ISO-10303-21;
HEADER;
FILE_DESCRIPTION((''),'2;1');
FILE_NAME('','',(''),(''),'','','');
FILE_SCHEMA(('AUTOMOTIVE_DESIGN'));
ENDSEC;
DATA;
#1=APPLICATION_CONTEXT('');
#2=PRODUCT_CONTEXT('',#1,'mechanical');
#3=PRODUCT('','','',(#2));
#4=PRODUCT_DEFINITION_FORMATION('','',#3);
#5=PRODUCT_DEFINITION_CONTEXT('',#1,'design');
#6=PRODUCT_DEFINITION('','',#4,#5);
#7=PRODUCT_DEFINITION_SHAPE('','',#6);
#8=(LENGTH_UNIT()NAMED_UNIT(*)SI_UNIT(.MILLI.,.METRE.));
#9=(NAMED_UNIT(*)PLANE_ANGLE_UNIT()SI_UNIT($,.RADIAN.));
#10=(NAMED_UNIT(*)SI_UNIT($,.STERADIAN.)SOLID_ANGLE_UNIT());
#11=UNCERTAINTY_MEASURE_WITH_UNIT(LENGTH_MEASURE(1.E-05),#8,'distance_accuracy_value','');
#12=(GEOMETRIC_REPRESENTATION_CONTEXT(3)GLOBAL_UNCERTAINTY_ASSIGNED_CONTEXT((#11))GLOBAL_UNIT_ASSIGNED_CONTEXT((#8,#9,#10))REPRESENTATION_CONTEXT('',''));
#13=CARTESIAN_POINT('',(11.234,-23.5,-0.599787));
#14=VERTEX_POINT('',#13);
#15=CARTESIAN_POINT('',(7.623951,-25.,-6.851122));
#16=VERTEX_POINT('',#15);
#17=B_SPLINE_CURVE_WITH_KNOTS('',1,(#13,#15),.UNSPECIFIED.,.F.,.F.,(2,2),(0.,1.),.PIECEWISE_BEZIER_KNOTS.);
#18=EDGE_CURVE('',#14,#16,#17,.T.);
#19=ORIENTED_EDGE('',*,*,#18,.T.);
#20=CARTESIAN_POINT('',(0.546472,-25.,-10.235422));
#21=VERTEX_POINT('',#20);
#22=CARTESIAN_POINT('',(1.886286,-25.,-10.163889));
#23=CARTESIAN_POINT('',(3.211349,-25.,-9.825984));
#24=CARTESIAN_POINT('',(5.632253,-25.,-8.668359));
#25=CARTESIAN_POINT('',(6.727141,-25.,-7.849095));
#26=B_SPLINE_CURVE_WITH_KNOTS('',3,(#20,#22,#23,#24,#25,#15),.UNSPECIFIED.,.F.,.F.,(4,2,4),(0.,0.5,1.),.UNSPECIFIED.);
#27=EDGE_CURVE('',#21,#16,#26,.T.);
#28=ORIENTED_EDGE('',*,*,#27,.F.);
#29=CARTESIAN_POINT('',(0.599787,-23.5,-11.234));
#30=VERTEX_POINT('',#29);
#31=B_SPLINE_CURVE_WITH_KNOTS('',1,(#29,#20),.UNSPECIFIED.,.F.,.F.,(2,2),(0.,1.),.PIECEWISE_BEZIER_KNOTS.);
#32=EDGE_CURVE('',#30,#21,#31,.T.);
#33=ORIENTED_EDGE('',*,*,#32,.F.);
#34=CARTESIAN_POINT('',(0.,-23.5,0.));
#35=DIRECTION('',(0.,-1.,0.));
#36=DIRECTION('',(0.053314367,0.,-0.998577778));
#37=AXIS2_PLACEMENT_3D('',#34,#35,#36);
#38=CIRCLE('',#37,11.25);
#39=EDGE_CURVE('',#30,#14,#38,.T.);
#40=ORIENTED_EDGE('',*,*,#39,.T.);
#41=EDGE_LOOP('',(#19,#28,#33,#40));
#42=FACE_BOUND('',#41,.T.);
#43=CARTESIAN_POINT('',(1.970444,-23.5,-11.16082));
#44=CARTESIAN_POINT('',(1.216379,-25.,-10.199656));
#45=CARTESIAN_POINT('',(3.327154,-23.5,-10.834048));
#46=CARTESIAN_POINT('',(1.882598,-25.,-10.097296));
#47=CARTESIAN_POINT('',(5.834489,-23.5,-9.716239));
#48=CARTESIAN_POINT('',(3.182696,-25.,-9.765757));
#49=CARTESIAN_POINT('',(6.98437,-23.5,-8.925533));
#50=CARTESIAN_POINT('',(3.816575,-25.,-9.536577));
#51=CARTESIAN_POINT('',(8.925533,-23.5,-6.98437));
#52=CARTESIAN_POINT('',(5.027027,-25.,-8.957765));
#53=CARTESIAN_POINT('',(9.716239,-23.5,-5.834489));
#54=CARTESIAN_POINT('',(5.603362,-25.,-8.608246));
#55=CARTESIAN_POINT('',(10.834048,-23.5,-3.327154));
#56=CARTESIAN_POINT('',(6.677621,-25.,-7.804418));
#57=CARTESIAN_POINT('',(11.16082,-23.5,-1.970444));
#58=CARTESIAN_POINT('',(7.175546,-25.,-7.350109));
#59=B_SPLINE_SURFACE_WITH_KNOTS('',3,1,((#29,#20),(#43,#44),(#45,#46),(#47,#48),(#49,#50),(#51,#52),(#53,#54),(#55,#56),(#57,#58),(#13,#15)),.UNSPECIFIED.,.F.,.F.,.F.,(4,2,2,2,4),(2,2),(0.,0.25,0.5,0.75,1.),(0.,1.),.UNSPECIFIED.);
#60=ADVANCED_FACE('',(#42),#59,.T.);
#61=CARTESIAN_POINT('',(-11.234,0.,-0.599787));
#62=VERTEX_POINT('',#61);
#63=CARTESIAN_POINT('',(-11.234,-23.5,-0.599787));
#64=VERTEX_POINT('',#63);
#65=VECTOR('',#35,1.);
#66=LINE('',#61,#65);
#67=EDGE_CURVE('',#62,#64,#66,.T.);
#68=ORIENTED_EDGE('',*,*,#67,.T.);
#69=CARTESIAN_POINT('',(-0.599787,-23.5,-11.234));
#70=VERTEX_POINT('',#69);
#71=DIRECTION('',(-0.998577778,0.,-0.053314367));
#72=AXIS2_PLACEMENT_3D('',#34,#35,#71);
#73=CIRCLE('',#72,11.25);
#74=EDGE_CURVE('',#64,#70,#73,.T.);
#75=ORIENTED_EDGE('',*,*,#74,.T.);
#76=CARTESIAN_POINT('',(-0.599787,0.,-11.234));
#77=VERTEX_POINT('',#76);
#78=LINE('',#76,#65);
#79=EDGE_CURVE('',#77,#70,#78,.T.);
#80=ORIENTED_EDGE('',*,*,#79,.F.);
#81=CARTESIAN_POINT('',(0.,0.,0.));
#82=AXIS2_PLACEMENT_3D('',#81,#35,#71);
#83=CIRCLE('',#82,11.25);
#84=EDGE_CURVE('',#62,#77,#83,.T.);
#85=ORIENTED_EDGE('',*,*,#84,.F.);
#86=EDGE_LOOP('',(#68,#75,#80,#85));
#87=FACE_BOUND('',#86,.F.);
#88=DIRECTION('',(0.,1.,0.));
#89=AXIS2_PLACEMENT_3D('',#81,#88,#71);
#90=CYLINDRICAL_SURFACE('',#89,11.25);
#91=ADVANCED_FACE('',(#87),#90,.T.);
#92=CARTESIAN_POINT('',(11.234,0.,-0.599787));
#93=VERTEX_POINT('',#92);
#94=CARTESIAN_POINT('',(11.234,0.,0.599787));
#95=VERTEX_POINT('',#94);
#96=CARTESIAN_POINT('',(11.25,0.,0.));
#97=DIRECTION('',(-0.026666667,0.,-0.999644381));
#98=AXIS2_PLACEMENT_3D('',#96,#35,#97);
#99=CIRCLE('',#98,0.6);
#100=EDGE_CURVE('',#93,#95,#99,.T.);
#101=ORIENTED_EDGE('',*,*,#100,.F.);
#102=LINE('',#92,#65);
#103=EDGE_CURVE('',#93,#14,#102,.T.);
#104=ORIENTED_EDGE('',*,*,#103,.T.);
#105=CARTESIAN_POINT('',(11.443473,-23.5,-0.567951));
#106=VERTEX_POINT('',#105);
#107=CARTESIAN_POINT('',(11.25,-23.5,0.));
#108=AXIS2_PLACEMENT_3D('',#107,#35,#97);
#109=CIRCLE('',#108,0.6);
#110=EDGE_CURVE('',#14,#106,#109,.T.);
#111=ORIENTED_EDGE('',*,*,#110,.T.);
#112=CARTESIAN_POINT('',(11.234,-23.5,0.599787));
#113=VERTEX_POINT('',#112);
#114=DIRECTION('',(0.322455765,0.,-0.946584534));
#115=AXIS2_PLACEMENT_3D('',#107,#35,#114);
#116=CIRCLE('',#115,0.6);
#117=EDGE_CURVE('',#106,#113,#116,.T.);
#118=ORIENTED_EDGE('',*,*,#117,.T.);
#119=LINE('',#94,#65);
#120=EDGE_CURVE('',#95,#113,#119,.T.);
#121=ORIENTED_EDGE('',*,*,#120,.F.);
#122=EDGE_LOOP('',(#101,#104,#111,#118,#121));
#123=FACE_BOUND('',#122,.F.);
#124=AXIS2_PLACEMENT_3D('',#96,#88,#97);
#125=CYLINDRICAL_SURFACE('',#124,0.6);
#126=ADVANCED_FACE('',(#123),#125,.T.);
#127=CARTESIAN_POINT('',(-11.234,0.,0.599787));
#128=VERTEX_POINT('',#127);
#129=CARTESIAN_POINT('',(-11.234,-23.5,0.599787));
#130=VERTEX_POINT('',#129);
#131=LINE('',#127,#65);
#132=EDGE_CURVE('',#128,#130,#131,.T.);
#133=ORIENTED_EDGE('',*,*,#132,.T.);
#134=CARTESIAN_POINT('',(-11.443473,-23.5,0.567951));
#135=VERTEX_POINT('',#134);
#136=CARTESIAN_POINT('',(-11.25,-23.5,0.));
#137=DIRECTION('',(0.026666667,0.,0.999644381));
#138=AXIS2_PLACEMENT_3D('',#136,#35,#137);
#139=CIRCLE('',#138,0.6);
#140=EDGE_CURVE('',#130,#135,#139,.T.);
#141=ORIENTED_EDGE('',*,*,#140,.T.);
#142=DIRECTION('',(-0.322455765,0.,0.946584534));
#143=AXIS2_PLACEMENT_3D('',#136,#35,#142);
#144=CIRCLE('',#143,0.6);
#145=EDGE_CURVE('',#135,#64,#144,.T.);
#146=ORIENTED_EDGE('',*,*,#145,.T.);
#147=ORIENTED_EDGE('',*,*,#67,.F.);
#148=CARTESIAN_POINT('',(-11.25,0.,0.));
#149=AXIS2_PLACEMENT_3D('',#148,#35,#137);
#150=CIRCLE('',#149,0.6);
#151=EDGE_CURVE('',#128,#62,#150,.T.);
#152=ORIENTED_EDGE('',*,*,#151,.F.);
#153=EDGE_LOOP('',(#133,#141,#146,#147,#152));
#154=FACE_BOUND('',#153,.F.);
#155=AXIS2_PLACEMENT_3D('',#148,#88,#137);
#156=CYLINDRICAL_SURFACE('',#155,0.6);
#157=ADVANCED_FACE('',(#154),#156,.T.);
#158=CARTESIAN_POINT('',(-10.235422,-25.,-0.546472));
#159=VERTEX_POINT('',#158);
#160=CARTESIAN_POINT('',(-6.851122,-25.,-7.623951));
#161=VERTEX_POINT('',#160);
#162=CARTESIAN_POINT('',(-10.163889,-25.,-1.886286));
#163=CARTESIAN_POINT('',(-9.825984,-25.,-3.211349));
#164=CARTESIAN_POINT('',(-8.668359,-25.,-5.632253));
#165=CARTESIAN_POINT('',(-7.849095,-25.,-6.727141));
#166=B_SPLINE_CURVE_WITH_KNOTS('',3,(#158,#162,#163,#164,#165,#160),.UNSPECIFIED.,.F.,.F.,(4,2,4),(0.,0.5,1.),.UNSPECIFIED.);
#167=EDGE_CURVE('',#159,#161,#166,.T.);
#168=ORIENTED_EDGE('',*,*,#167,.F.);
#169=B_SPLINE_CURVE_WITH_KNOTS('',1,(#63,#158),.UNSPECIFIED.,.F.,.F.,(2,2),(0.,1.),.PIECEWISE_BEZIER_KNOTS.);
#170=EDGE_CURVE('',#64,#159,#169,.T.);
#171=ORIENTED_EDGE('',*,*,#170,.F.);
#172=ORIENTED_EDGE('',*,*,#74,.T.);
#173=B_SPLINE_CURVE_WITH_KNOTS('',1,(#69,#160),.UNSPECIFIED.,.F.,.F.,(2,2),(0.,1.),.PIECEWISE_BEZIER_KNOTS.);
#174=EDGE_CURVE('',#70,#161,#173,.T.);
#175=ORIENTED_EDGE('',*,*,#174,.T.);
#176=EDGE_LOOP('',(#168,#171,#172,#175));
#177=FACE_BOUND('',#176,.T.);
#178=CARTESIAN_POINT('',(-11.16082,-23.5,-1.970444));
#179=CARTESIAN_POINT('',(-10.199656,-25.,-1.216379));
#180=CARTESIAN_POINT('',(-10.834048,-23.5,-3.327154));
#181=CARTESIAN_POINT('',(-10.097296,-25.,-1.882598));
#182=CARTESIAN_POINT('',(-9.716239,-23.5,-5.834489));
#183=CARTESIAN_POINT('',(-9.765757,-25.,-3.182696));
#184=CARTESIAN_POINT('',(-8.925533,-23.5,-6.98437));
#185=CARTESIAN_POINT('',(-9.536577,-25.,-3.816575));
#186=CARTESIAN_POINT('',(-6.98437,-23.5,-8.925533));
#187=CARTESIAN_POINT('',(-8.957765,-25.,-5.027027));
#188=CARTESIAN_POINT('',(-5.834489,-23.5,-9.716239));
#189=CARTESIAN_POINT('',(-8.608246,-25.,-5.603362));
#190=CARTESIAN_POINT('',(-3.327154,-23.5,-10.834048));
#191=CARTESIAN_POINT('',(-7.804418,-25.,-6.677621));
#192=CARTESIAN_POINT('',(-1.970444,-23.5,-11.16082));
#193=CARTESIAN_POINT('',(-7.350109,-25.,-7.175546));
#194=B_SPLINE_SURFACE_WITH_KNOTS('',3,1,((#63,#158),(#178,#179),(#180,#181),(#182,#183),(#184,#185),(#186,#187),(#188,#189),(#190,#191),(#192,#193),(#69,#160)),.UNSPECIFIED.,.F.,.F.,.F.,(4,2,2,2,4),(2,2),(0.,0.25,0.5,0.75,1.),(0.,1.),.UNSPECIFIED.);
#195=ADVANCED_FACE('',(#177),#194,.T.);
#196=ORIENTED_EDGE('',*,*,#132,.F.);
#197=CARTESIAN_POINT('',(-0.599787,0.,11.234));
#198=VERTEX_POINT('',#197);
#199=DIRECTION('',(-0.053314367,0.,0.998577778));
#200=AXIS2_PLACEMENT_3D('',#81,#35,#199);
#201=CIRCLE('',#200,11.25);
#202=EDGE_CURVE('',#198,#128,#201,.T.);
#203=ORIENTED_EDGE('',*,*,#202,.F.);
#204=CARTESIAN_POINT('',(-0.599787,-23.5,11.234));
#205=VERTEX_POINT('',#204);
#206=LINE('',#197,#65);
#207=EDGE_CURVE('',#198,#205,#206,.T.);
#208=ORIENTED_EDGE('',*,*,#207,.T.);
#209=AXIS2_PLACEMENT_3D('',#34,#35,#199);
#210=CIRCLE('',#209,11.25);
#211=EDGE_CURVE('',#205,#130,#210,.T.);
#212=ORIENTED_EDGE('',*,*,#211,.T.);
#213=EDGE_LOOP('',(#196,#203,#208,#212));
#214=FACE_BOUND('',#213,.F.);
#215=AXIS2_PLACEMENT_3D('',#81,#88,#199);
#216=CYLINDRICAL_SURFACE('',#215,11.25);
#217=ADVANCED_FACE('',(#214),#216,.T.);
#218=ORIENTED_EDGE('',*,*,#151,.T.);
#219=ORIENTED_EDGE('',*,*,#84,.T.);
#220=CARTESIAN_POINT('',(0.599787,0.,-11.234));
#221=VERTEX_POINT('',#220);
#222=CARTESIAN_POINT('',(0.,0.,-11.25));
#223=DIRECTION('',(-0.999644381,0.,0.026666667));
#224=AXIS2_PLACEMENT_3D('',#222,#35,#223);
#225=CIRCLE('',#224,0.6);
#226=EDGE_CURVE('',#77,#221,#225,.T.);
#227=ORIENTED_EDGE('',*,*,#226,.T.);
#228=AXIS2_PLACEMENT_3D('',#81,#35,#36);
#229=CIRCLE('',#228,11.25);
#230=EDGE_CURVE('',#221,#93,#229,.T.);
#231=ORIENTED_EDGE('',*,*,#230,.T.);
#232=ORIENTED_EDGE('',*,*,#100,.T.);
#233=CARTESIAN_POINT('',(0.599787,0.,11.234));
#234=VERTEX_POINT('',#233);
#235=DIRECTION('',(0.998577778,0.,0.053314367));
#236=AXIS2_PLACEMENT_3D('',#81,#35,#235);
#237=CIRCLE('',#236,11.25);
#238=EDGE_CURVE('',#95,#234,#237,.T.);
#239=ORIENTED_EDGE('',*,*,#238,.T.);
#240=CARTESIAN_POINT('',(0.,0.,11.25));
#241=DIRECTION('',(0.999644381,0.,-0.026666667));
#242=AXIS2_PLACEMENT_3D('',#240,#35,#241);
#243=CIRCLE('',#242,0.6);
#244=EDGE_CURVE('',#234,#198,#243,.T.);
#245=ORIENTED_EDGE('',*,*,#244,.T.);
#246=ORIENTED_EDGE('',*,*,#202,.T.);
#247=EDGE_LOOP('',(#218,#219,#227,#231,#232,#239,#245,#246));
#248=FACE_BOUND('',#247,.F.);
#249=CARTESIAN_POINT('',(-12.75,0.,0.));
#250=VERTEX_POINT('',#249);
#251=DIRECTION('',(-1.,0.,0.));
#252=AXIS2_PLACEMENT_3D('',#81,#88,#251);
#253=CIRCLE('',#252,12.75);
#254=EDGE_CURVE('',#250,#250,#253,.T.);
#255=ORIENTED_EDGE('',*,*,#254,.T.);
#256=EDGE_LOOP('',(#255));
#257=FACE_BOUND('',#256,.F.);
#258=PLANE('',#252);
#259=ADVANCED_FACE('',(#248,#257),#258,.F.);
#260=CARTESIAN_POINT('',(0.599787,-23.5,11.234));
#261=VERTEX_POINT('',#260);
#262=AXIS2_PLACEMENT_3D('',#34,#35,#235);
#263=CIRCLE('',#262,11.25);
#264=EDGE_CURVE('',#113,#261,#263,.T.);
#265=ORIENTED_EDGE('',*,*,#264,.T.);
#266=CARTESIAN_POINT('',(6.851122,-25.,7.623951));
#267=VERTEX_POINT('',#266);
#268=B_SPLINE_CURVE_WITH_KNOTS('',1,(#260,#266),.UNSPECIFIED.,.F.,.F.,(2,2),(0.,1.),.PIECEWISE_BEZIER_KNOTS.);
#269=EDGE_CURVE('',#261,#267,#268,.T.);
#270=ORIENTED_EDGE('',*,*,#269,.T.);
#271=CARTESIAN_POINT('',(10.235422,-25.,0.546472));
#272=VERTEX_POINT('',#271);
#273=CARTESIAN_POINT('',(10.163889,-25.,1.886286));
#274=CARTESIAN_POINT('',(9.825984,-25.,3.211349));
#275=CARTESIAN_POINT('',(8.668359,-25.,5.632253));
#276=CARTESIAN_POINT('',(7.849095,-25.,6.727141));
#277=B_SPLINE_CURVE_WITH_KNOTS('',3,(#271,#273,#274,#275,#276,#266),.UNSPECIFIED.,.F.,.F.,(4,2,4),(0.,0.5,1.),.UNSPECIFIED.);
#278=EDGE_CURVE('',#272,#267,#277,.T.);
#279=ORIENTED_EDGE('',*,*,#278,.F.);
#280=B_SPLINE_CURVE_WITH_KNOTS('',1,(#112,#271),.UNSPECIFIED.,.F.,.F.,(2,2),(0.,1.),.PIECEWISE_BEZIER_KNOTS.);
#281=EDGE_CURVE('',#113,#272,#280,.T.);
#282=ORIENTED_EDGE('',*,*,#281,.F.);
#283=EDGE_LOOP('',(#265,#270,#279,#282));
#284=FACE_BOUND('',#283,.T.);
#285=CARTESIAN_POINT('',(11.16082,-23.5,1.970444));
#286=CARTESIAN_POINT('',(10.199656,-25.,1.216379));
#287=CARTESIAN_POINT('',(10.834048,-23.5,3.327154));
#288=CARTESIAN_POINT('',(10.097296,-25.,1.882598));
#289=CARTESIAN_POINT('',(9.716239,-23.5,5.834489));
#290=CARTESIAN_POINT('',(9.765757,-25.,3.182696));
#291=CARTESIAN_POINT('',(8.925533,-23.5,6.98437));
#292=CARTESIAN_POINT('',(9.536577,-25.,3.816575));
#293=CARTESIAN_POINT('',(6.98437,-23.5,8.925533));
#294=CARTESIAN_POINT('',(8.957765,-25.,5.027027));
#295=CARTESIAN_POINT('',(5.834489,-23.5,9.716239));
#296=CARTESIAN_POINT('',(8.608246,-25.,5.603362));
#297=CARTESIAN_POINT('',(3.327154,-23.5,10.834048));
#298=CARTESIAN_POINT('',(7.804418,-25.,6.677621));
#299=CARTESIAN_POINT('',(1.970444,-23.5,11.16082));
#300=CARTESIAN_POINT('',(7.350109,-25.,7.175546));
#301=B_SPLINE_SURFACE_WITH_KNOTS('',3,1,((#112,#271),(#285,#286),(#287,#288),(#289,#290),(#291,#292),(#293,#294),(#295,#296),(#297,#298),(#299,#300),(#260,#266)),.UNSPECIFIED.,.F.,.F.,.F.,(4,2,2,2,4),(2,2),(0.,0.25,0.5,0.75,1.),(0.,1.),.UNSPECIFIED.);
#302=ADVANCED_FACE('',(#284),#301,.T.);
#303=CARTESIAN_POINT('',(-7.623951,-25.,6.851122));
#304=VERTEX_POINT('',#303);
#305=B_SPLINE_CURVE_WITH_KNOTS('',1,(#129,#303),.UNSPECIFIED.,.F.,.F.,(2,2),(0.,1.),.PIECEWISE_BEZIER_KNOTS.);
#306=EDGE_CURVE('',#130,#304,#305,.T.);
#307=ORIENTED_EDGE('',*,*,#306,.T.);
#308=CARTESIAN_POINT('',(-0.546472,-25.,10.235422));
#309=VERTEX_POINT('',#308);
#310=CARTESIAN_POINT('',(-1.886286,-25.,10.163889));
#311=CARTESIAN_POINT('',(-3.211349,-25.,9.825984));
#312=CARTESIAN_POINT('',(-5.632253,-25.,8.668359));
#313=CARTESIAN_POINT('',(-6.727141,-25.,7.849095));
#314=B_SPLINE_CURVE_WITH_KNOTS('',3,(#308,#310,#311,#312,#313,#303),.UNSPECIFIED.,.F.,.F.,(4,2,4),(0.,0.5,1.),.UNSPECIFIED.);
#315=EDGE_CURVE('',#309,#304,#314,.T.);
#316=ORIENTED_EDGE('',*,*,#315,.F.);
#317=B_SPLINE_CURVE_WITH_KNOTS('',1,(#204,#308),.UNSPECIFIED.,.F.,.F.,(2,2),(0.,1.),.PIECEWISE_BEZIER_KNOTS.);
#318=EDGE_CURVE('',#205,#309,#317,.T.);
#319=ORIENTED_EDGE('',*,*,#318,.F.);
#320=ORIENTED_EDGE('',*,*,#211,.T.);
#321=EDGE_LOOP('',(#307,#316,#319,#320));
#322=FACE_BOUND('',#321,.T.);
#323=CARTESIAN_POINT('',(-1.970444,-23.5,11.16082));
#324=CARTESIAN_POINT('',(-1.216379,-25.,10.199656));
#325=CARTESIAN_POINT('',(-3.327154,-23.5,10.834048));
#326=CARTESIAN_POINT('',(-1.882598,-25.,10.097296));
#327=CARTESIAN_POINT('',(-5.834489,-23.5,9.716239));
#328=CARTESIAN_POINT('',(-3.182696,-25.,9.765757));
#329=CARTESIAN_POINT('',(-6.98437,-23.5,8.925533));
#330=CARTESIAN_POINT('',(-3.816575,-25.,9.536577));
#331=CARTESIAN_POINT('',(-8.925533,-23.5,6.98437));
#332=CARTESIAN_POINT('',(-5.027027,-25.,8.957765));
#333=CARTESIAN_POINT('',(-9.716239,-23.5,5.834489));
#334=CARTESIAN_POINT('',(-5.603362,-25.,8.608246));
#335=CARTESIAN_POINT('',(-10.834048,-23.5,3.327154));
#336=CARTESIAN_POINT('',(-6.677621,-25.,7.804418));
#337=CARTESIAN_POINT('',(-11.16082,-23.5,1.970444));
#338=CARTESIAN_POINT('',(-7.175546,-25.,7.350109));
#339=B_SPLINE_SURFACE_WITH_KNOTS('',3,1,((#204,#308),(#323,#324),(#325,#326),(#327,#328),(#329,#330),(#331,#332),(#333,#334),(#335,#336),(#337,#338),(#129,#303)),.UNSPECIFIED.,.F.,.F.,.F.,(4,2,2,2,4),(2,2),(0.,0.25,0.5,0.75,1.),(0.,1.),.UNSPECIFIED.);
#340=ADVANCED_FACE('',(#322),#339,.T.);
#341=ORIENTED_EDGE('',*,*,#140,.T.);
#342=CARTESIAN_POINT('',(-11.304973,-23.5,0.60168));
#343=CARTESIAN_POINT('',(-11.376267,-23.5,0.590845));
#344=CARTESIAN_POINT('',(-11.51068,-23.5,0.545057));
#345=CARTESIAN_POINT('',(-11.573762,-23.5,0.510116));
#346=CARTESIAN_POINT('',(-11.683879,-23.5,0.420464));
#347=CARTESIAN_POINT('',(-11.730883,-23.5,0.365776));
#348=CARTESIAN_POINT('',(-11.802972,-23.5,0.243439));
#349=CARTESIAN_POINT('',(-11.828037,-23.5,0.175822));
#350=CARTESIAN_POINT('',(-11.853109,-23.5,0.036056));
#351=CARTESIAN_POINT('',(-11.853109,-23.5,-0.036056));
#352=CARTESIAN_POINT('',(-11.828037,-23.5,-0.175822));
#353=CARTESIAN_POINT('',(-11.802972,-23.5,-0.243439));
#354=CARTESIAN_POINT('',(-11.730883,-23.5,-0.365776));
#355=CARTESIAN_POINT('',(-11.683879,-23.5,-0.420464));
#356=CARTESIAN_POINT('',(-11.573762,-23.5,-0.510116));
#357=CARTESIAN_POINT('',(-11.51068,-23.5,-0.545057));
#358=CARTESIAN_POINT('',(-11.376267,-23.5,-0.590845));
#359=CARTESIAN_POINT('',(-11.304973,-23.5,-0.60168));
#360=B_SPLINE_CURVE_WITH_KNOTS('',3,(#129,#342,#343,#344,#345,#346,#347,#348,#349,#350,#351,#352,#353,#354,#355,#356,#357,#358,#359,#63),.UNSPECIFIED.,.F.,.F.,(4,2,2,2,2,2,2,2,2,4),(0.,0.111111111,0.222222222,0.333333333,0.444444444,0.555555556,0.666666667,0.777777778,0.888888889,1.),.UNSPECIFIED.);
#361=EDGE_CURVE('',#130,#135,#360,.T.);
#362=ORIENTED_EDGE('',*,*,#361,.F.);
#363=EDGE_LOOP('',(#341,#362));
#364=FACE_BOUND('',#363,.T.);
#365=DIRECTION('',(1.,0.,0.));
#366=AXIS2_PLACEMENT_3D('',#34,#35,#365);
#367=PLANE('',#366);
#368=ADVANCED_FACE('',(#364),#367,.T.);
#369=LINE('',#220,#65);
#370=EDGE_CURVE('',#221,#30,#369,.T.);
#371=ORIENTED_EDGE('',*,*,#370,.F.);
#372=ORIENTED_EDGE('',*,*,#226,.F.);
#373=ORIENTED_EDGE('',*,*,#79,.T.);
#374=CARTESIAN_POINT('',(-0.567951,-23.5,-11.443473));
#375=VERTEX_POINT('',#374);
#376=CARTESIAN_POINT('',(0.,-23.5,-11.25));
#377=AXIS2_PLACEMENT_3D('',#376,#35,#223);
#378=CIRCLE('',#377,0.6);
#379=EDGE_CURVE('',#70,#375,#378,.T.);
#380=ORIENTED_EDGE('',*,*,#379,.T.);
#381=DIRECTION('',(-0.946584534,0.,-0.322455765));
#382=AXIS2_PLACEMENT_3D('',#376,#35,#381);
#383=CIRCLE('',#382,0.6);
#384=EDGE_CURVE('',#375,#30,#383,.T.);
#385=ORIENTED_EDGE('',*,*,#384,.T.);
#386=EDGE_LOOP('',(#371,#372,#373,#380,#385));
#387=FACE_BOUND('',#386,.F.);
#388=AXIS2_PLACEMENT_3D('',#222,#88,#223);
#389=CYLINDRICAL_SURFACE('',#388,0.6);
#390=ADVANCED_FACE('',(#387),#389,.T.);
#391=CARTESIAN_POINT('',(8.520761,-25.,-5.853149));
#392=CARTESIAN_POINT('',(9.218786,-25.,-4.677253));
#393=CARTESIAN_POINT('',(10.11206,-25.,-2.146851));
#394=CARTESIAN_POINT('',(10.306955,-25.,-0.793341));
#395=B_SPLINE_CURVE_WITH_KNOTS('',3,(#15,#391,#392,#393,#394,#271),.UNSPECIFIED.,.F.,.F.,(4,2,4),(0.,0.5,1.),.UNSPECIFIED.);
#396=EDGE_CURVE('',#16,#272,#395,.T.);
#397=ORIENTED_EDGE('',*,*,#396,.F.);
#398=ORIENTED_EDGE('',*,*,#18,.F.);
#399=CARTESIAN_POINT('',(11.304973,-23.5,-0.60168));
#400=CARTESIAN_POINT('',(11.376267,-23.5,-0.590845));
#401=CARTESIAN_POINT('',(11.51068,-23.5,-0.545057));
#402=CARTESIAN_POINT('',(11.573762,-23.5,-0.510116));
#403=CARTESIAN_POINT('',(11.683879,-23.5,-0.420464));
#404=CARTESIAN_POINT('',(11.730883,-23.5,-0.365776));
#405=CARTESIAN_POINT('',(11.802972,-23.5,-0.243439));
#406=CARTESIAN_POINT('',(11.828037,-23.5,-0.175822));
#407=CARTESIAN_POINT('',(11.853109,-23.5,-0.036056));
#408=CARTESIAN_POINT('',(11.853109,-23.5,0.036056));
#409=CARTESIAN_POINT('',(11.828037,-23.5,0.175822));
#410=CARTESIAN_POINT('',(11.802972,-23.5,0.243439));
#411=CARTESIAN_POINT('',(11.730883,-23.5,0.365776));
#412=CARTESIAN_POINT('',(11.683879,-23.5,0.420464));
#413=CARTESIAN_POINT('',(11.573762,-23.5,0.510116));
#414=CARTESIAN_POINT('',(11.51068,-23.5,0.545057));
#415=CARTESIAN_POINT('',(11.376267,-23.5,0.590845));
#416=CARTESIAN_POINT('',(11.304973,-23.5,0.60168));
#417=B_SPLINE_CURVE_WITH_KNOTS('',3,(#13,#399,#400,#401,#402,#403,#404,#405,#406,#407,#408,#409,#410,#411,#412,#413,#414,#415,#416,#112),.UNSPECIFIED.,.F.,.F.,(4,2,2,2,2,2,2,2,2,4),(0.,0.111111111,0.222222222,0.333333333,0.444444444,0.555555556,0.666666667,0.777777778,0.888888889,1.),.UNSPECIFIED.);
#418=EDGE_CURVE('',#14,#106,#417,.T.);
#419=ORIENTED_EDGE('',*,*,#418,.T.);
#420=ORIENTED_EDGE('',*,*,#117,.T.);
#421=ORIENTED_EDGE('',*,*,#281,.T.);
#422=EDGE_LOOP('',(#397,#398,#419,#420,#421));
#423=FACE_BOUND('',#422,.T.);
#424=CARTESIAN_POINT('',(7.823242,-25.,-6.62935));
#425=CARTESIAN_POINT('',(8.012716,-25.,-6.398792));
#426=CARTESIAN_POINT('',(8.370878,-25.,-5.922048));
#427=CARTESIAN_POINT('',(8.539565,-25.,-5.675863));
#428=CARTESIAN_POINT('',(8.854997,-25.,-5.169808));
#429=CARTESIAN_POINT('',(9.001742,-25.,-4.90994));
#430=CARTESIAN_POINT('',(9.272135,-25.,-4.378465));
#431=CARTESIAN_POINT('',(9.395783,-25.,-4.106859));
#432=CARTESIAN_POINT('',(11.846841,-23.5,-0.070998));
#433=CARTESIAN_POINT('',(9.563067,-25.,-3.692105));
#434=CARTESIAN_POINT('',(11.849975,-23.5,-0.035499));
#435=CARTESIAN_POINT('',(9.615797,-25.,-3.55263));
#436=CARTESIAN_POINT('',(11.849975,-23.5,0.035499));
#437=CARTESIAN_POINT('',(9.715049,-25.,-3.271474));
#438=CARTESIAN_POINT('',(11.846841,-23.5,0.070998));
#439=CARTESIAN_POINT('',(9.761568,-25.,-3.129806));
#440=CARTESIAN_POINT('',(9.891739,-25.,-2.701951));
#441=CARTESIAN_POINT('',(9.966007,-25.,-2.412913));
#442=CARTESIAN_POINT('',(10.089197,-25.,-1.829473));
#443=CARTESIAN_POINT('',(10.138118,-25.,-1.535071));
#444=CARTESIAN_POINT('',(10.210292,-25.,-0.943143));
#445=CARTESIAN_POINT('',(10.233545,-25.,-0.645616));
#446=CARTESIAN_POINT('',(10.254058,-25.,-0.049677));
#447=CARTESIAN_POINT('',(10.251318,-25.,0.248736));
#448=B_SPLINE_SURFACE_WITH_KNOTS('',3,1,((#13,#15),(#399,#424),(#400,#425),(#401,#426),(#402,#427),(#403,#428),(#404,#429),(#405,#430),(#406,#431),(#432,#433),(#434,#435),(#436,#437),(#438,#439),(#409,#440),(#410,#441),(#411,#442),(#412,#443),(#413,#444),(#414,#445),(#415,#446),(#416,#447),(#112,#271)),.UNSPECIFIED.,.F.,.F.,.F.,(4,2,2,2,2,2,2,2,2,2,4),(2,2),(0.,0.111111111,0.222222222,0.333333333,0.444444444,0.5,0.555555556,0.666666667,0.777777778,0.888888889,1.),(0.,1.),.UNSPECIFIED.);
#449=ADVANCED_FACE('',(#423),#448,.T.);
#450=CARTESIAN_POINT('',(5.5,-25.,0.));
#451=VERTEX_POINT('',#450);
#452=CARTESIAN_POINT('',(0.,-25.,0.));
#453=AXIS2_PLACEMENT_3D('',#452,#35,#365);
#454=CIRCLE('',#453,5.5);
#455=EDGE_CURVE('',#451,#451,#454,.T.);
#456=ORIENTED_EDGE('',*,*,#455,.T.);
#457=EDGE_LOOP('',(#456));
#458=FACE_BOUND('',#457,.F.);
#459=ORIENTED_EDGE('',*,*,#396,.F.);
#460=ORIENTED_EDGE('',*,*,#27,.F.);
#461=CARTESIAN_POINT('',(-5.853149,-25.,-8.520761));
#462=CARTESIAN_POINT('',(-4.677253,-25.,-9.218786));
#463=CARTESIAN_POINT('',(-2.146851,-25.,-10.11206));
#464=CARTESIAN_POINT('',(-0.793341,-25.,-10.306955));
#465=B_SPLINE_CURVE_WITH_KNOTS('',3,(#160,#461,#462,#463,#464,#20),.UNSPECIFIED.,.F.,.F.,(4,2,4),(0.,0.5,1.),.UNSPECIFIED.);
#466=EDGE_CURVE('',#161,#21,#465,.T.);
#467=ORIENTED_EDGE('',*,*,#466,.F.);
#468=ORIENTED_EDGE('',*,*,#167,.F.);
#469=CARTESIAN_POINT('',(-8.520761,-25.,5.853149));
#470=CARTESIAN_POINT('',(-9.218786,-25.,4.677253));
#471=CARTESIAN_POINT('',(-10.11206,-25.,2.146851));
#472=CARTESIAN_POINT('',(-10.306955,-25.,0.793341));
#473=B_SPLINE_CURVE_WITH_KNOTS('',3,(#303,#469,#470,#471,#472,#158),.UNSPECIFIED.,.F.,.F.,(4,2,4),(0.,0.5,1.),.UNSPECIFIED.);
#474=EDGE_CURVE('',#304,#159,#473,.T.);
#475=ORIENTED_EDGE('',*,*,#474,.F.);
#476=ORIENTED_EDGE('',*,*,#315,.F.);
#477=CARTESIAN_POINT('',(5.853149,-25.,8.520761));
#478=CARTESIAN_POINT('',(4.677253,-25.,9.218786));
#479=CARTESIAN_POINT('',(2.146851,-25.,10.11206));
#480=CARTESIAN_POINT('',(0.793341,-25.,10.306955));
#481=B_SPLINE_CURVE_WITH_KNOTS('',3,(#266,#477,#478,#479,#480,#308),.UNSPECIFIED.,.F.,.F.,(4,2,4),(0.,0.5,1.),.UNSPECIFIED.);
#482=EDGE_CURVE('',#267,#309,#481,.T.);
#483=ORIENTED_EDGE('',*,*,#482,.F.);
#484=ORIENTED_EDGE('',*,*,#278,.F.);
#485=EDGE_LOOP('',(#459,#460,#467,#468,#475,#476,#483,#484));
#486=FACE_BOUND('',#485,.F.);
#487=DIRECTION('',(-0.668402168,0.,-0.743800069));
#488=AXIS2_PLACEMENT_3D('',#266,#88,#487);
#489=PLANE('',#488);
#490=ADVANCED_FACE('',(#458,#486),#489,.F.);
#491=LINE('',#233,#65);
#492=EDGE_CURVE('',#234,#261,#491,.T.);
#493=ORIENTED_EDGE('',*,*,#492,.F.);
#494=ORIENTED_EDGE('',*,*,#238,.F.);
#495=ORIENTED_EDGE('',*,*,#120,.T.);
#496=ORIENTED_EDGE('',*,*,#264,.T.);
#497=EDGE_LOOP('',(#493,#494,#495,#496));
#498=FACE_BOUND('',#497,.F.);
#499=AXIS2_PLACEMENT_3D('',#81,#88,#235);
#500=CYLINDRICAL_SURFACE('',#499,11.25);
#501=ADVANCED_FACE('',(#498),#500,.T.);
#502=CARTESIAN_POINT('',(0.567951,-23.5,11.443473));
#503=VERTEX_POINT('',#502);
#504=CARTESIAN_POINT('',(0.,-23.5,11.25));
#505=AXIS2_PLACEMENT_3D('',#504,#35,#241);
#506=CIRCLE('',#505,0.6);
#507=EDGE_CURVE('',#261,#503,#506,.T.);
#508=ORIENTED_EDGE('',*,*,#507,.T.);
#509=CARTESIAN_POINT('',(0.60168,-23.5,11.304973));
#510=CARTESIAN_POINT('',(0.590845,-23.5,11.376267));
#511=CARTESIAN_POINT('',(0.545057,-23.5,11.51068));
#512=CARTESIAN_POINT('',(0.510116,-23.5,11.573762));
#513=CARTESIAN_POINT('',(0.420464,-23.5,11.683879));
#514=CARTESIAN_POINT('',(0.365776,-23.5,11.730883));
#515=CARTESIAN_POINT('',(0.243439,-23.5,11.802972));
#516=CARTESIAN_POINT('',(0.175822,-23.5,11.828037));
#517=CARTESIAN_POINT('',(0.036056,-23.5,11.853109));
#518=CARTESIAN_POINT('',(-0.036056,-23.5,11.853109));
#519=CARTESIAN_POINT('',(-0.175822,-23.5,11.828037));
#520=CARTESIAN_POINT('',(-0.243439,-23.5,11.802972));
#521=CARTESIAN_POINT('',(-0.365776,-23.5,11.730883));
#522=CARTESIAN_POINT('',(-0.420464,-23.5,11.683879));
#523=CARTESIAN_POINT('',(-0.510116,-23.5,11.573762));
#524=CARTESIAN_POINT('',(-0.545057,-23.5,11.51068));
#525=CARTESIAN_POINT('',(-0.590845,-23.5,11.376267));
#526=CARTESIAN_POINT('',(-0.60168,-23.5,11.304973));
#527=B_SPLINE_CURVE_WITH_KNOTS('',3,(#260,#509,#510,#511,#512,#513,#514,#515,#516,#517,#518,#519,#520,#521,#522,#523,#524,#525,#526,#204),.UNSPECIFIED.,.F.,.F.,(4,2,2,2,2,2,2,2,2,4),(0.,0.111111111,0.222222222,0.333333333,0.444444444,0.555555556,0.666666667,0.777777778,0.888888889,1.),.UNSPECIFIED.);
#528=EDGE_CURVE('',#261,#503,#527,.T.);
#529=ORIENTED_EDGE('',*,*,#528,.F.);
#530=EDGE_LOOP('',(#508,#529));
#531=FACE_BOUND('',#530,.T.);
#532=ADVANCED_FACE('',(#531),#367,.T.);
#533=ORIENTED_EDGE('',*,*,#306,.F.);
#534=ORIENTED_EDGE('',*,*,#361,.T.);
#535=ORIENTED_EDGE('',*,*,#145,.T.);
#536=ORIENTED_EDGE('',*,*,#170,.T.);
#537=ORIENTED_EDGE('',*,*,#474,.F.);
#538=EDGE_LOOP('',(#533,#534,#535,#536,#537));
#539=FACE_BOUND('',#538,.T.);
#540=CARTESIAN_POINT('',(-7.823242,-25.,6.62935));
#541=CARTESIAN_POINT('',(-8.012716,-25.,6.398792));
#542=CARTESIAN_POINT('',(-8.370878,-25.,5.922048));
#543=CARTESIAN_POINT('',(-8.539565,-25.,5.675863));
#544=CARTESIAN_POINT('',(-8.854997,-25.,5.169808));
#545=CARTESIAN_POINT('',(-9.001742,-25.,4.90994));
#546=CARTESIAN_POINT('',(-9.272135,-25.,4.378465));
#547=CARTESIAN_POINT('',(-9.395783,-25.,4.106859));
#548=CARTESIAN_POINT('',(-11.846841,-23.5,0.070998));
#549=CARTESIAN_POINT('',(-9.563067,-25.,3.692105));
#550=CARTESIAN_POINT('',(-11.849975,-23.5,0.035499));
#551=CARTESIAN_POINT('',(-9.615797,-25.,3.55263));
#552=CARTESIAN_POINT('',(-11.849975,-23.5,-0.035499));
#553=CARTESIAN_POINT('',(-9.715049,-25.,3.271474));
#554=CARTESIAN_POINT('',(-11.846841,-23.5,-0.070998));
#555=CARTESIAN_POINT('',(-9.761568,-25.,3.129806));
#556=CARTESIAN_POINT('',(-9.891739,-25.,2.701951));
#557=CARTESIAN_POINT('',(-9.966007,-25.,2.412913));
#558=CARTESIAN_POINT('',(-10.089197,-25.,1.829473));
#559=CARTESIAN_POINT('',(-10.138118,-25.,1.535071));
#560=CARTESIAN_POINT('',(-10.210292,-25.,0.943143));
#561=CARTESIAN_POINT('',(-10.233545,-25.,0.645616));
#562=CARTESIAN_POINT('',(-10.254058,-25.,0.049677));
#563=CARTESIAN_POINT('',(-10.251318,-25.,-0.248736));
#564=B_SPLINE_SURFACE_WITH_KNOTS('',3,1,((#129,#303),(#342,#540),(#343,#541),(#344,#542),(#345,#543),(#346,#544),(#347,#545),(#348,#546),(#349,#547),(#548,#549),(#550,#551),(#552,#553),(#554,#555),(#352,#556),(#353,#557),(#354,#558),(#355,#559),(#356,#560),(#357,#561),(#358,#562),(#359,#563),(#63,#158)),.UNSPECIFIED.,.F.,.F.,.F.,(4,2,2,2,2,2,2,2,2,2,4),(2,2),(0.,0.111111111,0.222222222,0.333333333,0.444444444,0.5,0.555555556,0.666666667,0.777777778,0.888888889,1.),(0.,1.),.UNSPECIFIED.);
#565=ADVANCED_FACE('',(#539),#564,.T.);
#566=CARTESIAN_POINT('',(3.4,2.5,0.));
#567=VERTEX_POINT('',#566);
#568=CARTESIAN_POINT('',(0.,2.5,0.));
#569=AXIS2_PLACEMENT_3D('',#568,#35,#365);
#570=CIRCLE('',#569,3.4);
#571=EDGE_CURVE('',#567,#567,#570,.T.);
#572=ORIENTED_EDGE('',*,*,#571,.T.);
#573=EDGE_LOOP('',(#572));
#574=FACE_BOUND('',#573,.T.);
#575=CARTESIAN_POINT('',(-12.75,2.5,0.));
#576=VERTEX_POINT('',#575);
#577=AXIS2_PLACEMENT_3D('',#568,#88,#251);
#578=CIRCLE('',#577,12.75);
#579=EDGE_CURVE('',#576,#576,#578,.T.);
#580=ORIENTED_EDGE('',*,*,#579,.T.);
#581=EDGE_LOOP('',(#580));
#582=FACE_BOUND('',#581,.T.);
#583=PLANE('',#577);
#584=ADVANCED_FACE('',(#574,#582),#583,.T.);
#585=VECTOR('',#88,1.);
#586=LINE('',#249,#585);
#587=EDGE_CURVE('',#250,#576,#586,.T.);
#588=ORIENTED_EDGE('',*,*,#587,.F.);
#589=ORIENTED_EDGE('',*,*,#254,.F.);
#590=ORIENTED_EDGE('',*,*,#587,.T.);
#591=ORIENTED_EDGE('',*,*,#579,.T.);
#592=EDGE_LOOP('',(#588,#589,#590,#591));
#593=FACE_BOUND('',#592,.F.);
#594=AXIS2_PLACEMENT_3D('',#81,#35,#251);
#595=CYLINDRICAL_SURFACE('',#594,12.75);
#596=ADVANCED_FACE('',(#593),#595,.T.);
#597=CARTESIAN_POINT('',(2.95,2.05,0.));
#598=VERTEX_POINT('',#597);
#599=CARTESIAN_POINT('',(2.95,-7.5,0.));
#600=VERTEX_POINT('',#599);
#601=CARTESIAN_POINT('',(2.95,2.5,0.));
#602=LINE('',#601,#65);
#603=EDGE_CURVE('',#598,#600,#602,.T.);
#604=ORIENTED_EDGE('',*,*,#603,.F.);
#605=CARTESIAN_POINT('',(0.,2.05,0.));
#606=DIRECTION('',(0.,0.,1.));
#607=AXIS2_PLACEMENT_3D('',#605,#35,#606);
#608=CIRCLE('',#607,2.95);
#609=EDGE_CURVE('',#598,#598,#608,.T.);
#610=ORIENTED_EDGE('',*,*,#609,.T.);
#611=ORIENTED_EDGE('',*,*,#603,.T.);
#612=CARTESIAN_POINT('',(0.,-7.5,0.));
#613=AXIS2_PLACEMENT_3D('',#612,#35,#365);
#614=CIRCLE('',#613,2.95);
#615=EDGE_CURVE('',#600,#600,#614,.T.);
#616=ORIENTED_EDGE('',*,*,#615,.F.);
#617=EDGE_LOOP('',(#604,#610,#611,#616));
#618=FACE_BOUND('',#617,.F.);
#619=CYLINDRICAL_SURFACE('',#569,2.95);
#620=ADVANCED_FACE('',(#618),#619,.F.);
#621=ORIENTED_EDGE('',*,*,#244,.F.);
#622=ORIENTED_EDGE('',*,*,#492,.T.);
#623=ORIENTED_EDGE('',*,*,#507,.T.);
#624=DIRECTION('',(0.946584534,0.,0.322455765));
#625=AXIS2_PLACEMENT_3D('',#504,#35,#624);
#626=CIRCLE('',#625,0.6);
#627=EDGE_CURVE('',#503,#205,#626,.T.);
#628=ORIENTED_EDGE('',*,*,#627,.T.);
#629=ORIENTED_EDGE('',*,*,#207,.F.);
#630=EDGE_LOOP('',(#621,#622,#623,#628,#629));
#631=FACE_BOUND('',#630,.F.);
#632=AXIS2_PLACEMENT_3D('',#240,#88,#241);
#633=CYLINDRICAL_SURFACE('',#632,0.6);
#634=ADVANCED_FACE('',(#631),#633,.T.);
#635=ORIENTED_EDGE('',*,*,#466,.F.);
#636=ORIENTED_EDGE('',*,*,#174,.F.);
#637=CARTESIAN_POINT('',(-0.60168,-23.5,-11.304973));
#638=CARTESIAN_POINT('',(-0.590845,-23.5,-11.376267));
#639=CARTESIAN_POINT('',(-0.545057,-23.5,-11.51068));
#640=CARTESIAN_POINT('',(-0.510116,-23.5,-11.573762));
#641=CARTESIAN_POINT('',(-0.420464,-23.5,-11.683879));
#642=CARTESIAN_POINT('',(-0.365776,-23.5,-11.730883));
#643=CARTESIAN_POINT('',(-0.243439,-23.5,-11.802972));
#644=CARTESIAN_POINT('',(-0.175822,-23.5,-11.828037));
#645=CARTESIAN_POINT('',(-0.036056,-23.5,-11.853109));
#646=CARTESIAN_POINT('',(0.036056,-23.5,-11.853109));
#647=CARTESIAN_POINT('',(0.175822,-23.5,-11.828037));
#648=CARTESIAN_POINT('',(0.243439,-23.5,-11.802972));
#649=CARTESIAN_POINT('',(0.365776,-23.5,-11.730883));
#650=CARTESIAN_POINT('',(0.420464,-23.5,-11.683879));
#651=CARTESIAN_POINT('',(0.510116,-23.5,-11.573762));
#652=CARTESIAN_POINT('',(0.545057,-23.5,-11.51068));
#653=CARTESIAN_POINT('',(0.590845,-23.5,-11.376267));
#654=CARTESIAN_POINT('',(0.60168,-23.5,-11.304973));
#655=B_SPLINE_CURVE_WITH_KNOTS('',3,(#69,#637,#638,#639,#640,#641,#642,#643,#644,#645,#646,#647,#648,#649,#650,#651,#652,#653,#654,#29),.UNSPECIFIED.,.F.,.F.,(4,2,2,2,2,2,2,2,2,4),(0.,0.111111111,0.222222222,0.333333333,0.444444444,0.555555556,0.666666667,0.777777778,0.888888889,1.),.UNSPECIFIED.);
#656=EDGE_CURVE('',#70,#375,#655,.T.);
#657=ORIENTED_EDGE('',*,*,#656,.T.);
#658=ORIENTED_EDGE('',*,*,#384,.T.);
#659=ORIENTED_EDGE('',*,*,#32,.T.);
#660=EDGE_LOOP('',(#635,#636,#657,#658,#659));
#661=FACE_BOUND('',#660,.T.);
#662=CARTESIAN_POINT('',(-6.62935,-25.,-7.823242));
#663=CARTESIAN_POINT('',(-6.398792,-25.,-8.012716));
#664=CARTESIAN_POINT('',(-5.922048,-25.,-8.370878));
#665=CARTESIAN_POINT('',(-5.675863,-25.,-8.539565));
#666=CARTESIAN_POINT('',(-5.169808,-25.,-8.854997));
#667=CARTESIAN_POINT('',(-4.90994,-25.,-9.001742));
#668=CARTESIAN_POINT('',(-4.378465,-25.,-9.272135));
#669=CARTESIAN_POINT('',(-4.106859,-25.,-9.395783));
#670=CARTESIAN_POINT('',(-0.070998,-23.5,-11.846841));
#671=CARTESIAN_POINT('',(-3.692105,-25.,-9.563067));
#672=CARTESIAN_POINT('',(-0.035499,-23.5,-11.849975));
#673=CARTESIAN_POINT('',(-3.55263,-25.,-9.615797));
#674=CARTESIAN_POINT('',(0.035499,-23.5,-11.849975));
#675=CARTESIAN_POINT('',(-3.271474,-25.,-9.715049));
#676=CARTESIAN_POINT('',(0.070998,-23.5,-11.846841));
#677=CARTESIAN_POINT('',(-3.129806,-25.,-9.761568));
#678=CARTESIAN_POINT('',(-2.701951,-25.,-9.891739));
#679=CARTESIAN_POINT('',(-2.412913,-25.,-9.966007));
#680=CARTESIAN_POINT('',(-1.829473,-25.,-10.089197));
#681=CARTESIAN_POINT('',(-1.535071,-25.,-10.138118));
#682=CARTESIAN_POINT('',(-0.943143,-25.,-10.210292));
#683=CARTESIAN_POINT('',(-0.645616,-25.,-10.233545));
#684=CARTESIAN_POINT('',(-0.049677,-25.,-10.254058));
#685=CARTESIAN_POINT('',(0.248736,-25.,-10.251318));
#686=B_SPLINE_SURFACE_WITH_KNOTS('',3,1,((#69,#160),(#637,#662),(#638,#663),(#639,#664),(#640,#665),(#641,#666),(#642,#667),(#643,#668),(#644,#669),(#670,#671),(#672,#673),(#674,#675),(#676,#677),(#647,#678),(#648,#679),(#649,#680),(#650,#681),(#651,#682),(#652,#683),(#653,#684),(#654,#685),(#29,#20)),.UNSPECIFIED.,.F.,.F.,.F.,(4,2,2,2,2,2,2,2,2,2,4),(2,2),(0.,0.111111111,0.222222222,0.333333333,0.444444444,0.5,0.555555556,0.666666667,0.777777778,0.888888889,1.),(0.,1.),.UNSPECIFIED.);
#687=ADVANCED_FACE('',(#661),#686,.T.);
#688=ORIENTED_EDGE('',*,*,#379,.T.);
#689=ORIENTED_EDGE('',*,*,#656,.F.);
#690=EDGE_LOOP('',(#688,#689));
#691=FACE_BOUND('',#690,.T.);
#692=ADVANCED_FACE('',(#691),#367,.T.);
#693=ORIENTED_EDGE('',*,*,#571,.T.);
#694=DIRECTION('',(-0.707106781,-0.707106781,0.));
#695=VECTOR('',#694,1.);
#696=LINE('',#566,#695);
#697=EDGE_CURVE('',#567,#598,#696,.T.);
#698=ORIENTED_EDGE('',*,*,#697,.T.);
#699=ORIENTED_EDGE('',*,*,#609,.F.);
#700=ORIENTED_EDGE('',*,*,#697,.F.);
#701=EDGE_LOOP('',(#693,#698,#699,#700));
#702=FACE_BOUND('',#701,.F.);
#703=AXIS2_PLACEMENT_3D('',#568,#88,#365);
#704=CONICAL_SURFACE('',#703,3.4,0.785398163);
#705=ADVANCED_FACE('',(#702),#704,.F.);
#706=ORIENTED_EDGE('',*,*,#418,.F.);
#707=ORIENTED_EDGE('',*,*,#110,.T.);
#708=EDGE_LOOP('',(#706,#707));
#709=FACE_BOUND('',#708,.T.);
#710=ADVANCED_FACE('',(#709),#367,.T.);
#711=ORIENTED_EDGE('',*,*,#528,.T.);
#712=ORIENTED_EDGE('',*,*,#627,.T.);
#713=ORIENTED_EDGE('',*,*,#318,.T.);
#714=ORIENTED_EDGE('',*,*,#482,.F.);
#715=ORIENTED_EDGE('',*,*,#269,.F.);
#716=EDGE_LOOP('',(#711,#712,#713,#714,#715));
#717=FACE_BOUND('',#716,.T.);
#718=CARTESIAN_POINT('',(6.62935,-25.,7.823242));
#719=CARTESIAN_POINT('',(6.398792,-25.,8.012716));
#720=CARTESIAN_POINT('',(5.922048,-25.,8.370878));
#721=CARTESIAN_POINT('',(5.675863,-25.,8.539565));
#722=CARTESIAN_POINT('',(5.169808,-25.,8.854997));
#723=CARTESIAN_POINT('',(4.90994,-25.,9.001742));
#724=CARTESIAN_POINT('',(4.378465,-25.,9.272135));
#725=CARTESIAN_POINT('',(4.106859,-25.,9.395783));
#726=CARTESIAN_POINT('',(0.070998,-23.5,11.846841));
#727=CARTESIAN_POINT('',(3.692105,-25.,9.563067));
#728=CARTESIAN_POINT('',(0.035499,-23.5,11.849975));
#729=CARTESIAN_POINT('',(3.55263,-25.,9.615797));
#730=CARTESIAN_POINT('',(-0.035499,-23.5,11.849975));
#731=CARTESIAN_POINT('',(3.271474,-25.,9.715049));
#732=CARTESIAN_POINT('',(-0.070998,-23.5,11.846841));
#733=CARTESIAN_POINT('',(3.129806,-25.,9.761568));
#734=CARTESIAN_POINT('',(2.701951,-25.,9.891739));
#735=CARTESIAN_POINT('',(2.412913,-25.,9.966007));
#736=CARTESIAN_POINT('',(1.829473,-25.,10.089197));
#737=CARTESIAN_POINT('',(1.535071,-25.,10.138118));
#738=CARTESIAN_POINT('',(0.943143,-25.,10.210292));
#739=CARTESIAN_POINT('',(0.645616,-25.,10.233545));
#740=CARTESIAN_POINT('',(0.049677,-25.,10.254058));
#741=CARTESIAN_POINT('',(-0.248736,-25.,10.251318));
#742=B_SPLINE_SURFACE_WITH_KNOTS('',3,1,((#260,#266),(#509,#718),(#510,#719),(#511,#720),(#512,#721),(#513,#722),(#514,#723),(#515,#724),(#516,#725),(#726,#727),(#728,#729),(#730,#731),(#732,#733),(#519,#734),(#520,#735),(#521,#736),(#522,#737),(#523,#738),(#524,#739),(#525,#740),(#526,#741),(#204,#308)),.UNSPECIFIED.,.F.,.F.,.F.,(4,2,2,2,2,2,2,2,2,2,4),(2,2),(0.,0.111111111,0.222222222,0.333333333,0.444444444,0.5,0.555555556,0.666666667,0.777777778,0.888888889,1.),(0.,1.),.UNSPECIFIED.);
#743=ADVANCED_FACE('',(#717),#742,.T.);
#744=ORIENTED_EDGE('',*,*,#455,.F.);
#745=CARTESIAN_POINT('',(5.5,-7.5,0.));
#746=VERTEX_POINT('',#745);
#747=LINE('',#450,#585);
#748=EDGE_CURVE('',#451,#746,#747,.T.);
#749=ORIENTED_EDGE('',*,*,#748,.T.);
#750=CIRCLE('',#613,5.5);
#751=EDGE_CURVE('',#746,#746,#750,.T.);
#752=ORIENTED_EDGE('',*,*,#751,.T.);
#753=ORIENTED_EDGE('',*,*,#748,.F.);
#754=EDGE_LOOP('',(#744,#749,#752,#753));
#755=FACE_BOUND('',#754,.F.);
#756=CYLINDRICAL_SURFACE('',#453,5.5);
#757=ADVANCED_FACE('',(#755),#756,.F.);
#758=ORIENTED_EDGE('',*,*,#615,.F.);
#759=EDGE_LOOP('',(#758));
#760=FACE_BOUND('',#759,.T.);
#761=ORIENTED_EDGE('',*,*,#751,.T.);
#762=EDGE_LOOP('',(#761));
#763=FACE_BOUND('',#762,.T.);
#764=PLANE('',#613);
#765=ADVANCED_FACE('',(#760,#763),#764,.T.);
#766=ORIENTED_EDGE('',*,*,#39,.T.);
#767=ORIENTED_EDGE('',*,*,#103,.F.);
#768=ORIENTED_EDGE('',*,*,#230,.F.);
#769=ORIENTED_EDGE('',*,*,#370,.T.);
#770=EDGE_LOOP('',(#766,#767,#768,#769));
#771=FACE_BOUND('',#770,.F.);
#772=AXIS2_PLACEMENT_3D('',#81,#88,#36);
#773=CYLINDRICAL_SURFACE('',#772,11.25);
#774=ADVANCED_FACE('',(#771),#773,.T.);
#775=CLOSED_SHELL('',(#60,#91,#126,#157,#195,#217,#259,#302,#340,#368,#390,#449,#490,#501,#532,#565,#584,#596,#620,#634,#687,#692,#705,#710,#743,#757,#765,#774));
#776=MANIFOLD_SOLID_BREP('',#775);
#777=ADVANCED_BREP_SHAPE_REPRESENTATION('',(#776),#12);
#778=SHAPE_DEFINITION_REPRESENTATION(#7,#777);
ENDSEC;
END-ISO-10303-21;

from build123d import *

# Parameters (mm, degrees)
F1_DEPTH       = 23.5
F5_R           = 12.75
F6_DEPTH       = 2.5
F8_D           = 5.9
F8_CSINK_D     = 6.8
F8_CSINK_ANGLE = 90
F9_R           = 5.5
F10_DEPTH      = 17.5


# Not quite as in the source:
# - the arcs of a loft's sections are written as splines that run evenly, so that the points pair up as in the source's solid


with BuildPart() as f1:
    # F0 (on Front) → F1 (new body)
    with BuildSketch(Plane.XZ):
        with BuildLine():
            ThreePointArc((0.5997866287, 11.234), (0, 11.85), (-0.5997866287, 11.234))
            ThreePointArc((-0.5997866287, 11.234), (-7.9549512883, 7.9549512883), (-11.234, 0.5997866287))
            ThreePointArc((-11.234, 0.5997866287), (-11.85, 0), (-11.234, -0.5997866287))
            ThreePointArc((-11.234, -0.5997866287), (-7.9549512883, -7.9549512883), (-0.5997866287, -11.234))
            ThreePointArc((-0.5997866287, -11.234), (0, -11.85), (0.5997866287, -11.234))
            ThreePointArc((0.5997866287, -11.234), (7.9549512883, -7.9549512883), (11.234, -0.5997866287))
            ThreePointArc((11.234, -0.5997866287), (11.85, 0), (11.234, 0.5997866287))
            ThreePointArc((11.234, 0.5997866287), (7.9549512883, 7.9549512883), (0.5997866287, 11.234))
        make_face()
    extrude(amount=F1_DEPTH)

    # F1_face (on face) → F4 section 0
    with BuildSketch(Plane.XZ.offset(23.5)):
        with BuildLine():
            add(Edge.make_bspline(
                [(0.5997866287, 11.234), (0.6016799219, 11.3049732474), (0.5908445992, 11.376267359), (0.5450568557, 11.5106795168), (0.5101164815, 11.5737621993), (0.4204642218, 11.6838785828), (0.3657759235, 11.7308833124), (0.2434389451, 11.8029722112), (0.1758224517, 11.8280374139), (0.0360563953, 11.853109213), (-0.0360563953, 11.853109213), (-0.1758224517, 11.8280374139), (-0.2434389451, 11.8029722112), (-0.3657759235, 11.7308833124), (-0.4204642218, 11.6838785828), (-0.5101164815, 11.5737621993), (-0.5450568557, 11.5106795168), (-0.5908445992, 11.376267359), (-0.6016799219, 11.3049732474), (-0.5997866287, 11.234)],
                knots=[0, 0, 0, 0, 0.1111111111, 0.1111111111, 0.2222222222, 0.2222222222, 0.3333333333, 0.3333333333, 0.4444444444, 0.4444444444, 0.5555555556, 0.5555555556, 0.6666666667, 0.6666666667, 0.7777777778, 0.7777777778, 0.8888888889, 0.8888888889, 1, 1, 1, 1], degree=3))
            add(Edge.make_bspline(
                [(-0.5997866287, 11.234), (-1.9704441734, 11.1608201827), (-3.3271537618, 10.8340484232), (-5.834489174, 9.7162386482), (-6.984369661, 8.9255329157), (-8.9255329157, 6.984369661), (-9.7162386482, 5.834489174), (-10.8340484232, 3.3271537618), (-11.1608201827, 1.9704441734), (-11.234, 0.5997866287)],
                knots=[0, 0, 0, 0, 0.25, 0.25, 0.5, 0.5, 0.75, 0.75, 1, 1, 1, 1], degree=3))
            add(Edge.make_bspline(
                [(-11.234, 0.5997866287), (-11.3049732474, 0.6016799219), (-11.376267359, 0.5908445992), (-11.5106795168, 0.5450568557), (-11.5737621993, 0.5101164815), (-11.6838785828, 0.4204642218), (-11.7308833124, 0.3657759235), (-11.8029722112, 0.2434389451), (-11.8280374139, 0.1758224517), (-11.853109213, 0.0360563953), (-11.853109213, -0.0360563953), (-11.8280374139, -0.1758224517), (-11.8029722112, -0.2434389451), (-11.7308833124, -0.3657759235), (-11.6838785828, -0.4204642218), (-11.5737621993, -0.5101164815), (-11.5106795168, -0.5450568557), (-11.376267359, -0.5908445992), (-11.3049732474, -0.6016799219), (-11.234, -0.5997866287)],
                knots=[0, 0, 0, 0, 0.1111111111, 0.1111111111, 0.2222222222, 0.2222222222, 0.3333333333, 0.3333333333, 0.4444444444, 0.4444444444, 0.5555555556, 0.5555555556, 0.6666666667, 0.6666666667, 0.7777777778, 0.7777777778, 0.8888888889, 0.8888888889, 1, 1, 1, 1], degree=3))
            add(Edge.make_bspline(
                [(-11.234, -0.5997866287), (-11.1608201827, -1.9704441734), (-10.8340484232, -3.3271537618), (-9.7162386482, -5.834489174), (-8.9255329157, -6.984369661), (-6.984369661, -8.9255329157), (-5.834489174, -9.7162386482), (-3.3271537618, -10.8340484232), (-1.9704441734, -11.1608201827), (-0.5997866287, -11.234)],
                knots=[0, 0, 0, 0, 0.25, 0.25, 0.5, 0.5, 0.75, 0.75, 1, 1, 1, 1], degree=3))
            add(Edge.make_bspline(
                [(-0.5997866287, -11.234), (-0.6016799219, -11.3049732474), (-0.5908445992, -11.376267359), (-0.5450568557, -11.5106795168), (-0.5101164815, -11.5737621993), (-0.4204642218, -11.6838785828), (-0.3657759235, -11.7308833124), (-0.2434389451, -11.8029722112), (-0.1758224517, -11.8280374139), (-0.0360563953, -11.853109213), (0.0360563953, -11.853109213), (0.1758224517, -11.8280374139), (0.2434389451, -11.8029722112), (0.3657759235, -11.7308833124), (0.4204642218, -11.6838785828), (0.5101164815, -11.5737621993), (0.5450568557, -11.5106795168), (0.5908445992, -11.376267359), (0.6016799219, -11.3049732474), (0.5997866287, -11.234)],
                knots=[0, 0, 0, 0, 0.1111111111, 0.1111111111, 0.2222222222, 0.2222222222, 0.3333333333, 0.3333333333, 0.4444444444, 0.4444444444, 0.5555555556, 0.5555555556, 0.6666666667, 0.6666666667, 0.7777777778, 0.7777777778, 0.8888888889, 0.8888888889, 1, 1, 1, 1], degree=3))
            add(Edge.make_bspline(
                [(0.5997866287, -11.234), (1.9704441734, -11.1608201827), (3.3271537618, -10.8340484232), (5.834489174, -9.7162386482), (6.984369661, -8.9255329157), (8.9255329157, -6.984369661), (9.7162386482, -5.834489174), (10.8340484232, -3.3271537618), (11.1608201827, -1.9704441734), (11.234, -0.5997866287)],
                knots=[0, 0, 0, 0, 0.25, 0.25, 0.5, 0.5, 0.75, 0.75, 1, 1, 1, 1], degree=3))
            add(Edge.make_bspline(
                [(11.234, -0.5997866287), (11.3049732474, -0.6016799219), (11.376267359, -0.5908445992), (11.5106795168, -0.5450568557), (11.5737621993, -0.5101164815), (11.6838785828, -0.4204642218), (11.7308833124, -0.3657759235), (11.8029722112, -0.2434389451), (11.8280374139, -0.1758224517), (11.853109213, -0.0360563953), (11.853109213, 0.0360563953), (11.8280374139, 0.1758224517), (11.8029722112, 0.2434389451), (11.7308833124, 0.3657759235), (11.6838785828, 0.4204642218), (11.5737621993, 0.5101164815), (11.5106795168, 0.5450568557), (11.376267359, 0.5908445992), (11.3049732474, 0.6016799219), (11.234, 0.5997866287)],
                knots=[0, 0, 0, 0, 0.1111111111, 0.1111111111, 0.2222222222, 0.2222222222, 0.3333333333, 0.3333333333, 0.4444444444, 0.4444444444, 0.5555555556, 0.5555555556, 0.6666666667, 0.6666666667, 0.7777777778, 0.7777777778, 0.8888888889, 0.8888888889, 1, 1, 1, 1], degree=3))
            add(Edge.make_bspline(
                [(11.234, 0.5997866287), (11.1608201827, 1.9704441734), (10.8340484232, 3.3271537618), (9.7162386482, 5.834489174), (8.9255329157, 6.984369661), (6.984369661, 8.9255329157), (5.834489174, 9.7162386482), (3.3271537618, 10.8340484232), (1.9704441734, 11.1608201827), (0.5997866287, 11.234)],
                knots=[0, 0, 0, 0, 0.25, 0.25, 0.5, 0.5, 0.75, 0.75, 1, 1, 1, 1], degree=3))
        make_face()
    # F3 (on offset) → F4 section 1
    with BuildSketch(Plane.XZ.offset(25)):
        with BuildLine():
            add(Edge.make_bspline(
                [(-0.5464722617, 10.2354222222), (-1.8862858976, 10.1638891704), (-3.2113491637, 9.8259836202), (-5.6322529271, 8.6683588136), (-6.7271409022, 7.8490950331), (-7.6239507036, 6.8511222196)],
                knots=[0, 0, 0, 0, 0.5, 0.5, 1, 1, 1, 1], degree=3))
            add(Edge.make_bspline(
                [(-7.6239507036, 6.8511222196), (-8.5207605051, 5.8531494062), (-9.2187864201, 4.6772528793), (-10.112059537, 2.1468510607), (-10.306955274, 0.7933413741), (-10.2354222222, -0.5464722617)],
                knots=[0, 0, 0, 0, 0.5, 0.5, 1, 1, 1, 1], degree=3))
            add(Edge.make_bspline(
                [(-10.2354222222, -0.5464722617), (-10.1638891704, -1.8862858976), (-9.8259836202, -3.2113491637), (-8.6683588136, -5.6322529271), (-7.8490950331, -6.7271409022), (-6.8511222196, -7.6239507036)],
                knots=[0, 0, 0, 0, 0.5, 0.5, 1, 1, 1, 1], degree=3))
            add(Edge.make_bspline(
                [(-6.8511222196, -7.6239507036), (-5.8531494062, -8.5207605051), (-4.6772528793, -9.2187864201), (-2.1468510607, -10.112059537), (-0.7933413741, -10.306955274), (0.5464722617, -10.2354222222)],
                knots=[0, 0, 0, 0, 0.5, 0.5, 1, 1, 1, 1], degree=3))
            add(Edge.make_bspline(
                [(0.5464722617, -10.2354222222), (1.8862858976, -10.1638891704), (3.2113491637, -9.8259836202), (5.6322529271, -8.6683588136), (6.7271409022, -7.8490950331), (7.6239507036, -6.8511222196)],
                knots=[0, 0, 0, 0, 0.5, 0.5, 1, 1, 1, 1], degree=3))
            add(Edge.make_bspline(
                [(7.6239507036, -6.8511222196), (8.5207605051, -5.8531494062), (9.2187864201, -4.6772528793), (10.112059537, -2.1468510607), (10.306955274, -0.7933413741), (10.2354222222, 0.5464722617)],
                knots=[0, 0, 0, 0, 0.5, 0.5, 1, 1, 1, 1], degree=3))
            add(Edge.make_bspline(
                [(10.2354222222, 0.5464722617), (10.1638891704, 1.8862858976), (9.8259836202, 3.2113491637), (8.6683588136, 5.6322529271), (7.8490950331, 6.7271409022), (6.8511222196, 7.6239507036)],
                knots=[0, 0, 0, 0, 0.5, 0.5, 1, 1, 1, 1], degree=3))
            add(Edge.make_bspline(
                [(6.8511222196, 7.6239507036), (5.8531494062, 8.5207605051), (4.6772528793, 9.2187864201), (2.1468510607, 10.112059537), (0.7933413741, 10.306955274), (-0.5464722617, 10.2354222222)],
                knots=[0, 0, 0, 0, 0.5, 0.5, 1, 1, 1, 1], degree=3))
        make_face()
    loft(ruled=True)

    # F5 (on face) → F6 (join)
    with BuildSketch(Plane(origin=(0, 0, 0), x_dir=(-1, 0, 0), z_dir=(0, 1, 0))):
        Circle(F5_R)
    extrude(amount=F6_DEPTH)

    # F8 (through all)
    with Locations(Plane(origin=(0, 2.5, 0), x_dir=(-1, 0, 0), z_dir=(0, 1, 0))):
        with Locations((0, 0)):
            CounterSinkHole(F8_D / 2, F8_CSINK_D / 2, counter_sink_angle=F8_CSINK_ANGLE)

    # F9 (on face) → F10 (cut)
    with BuildSketch(Plane.XZ.offset(25)):
        Circle(F9_R)
    extrude(amount=-F10_DEPTH, mode=Mode.SUBTRACT)


solid = f1.part
